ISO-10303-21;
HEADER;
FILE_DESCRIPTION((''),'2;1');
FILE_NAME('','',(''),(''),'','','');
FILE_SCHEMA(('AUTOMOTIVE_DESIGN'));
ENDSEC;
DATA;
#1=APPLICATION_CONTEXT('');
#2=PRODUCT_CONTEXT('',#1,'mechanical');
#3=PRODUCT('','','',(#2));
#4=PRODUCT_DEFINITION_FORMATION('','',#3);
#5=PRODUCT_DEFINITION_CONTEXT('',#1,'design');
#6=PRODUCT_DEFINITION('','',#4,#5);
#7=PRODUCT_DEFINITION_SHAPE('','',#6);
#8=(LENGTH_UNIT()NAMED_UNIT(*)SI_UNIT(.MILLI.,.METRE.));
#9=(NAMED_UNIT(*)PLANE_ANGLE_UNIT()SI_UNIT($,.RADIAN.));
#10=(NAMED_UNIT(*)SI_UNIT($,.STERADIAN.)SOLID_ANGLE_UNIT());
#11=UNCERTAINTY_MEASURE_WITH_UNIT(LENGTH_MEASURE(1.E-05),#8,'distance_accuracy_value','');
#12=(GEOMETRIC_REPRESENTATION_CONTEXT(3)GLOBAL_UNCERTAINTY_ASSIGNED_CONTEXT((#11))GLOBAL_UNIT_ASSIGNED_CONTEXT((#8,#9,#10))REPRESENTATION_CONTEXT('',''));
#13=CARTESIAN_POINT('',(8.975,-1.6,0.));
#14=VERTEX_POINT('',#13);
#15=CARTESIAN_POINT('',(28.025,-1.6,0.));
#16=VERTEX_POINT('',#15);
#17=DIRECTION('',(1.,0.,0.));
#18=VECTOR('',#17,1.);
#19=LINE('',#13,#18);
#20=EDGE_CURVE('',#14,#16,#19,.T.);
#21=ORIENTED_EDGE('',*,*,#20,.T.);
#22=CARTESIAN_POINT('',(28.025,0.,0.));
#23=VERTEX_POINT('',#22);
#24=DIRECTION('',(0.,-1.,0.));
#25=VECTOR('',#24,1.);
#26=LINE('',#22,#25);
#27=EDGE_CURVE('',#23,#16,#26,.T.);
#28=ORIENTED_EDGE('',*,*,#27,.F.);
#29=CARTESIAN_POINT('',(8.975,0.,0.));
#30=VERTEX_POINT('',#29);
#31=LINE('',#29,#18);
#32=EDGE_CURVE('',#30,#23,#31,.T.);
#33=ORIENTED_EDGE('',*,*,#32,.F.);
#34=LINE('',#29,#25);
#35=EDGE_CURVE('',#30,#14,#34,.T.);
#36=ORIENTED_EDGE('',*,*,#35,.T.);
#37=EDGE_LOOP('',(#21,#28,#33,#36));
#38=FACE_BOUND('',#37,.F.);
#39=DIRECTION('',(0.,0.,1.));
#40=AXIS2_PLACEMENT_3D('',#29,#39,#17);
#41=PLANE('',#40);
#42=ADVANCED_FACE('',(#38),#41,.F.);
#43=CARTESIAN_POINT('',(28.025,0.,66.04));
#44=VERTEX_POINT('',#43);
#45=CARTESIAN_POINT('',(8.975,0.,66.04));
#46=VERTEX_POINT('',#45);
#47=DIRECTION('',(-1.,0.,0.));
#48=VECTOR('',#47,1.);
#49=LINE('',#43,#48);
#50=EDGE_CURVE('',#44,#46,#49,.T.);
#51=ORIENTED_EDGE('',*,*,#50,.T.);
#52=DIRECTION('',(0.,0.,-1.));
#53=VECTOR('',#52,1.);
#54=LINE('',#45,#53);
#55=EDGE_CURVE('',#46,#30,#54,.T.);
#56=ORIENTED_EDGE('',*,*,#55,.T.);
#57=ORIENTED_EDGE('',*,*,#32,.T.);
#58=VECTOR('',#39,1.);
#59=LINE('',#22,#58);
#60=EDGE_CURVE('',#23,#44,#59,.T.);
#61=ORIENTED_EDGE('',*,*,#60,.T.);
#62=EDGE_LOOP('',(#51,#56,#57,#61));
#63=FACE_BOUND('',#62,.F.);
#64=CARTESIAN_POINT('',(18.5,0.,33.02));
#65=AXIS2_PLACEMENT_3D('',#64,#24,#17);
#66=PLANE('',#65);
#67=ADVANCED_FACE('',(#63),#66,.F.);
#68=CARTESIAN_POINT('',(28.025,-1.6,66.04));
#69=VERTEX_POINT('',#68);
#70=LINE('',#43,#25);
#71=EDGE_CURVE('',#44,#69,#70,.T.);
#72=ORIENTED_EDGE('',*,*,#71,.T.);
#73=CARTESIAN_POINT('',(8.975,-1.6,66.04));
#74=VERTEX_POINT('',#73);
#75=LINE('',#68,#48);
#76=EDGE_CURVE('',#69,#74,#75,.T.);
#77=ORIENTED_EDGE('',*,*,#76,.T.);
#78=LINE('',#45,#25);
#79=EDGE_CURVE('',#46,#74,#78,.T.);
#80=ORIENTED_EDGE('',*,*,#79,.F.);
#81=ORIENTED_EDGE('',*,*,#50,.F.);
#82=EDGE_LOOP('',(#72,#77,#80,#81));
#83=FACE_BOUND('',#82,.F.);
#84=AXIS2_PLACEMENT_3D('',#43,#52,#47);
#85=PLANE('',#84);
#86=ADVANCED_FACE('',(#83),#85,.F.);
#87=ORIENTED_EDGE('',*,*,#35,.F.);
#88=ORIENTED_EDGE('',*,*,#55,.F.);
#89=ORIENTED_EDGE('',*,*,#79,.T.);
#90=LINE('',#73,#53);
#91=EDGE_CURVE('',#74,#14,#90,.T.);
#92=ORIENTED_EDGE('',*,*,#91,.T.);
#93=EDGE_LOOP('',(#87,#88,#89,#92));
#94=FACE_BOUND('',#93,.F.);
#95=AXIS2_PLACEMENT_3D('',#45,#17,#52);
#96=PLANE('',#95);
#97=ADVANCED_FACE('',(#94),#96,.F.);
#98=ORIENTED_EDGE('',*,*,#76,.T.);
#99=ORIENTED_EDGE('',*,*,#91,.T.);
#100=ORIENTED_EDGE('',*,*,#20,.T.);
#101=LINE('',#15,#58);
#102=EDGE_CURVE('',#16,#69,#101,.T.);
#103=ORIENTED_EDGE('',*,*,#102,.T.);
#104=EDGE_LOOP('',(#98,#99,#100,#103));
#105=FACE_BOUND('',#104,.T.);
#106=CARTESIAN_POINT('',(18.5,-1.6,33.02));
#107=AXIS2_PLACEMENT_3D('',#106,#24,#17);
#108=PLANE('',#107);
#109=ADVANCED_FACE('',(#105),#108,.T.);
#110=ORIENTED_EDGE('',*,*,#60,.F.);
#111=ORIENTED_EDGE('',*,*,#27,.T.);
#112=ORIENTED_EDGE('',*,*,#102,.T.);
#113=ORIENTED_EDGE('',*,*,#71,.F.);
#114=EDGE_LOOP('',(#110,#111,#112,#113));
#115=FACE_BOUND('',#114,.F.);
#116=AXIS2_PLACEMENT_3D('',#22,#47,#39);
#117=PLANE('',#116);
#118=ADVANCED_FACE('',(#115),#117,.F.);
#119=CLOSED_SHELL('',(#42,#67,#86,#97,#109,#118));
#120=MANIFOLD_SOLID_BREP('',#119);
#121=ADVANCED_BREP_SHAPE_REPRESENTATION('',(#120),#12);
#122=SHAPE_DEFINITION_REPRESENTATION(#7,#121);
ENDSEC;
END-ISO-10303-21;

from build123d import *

# Parameters (mm, degrees)
F1_DEPTH = 1.6


# Not quite as in the source:
# - a feature names something its author has since deleted; it is built from what else it names


with BuildPart() as f1:
    # F0 (on Front) → F1 (new body)
    with BuildSketch(Plane.XZ):
        Polygon((8.975, 66.04), (8.975, 0), (18.5, 0), (28.025, 0), (28.025, 66.04), align=None)
    extrude(amount=F1_DEPTH)


solid = f1.part
